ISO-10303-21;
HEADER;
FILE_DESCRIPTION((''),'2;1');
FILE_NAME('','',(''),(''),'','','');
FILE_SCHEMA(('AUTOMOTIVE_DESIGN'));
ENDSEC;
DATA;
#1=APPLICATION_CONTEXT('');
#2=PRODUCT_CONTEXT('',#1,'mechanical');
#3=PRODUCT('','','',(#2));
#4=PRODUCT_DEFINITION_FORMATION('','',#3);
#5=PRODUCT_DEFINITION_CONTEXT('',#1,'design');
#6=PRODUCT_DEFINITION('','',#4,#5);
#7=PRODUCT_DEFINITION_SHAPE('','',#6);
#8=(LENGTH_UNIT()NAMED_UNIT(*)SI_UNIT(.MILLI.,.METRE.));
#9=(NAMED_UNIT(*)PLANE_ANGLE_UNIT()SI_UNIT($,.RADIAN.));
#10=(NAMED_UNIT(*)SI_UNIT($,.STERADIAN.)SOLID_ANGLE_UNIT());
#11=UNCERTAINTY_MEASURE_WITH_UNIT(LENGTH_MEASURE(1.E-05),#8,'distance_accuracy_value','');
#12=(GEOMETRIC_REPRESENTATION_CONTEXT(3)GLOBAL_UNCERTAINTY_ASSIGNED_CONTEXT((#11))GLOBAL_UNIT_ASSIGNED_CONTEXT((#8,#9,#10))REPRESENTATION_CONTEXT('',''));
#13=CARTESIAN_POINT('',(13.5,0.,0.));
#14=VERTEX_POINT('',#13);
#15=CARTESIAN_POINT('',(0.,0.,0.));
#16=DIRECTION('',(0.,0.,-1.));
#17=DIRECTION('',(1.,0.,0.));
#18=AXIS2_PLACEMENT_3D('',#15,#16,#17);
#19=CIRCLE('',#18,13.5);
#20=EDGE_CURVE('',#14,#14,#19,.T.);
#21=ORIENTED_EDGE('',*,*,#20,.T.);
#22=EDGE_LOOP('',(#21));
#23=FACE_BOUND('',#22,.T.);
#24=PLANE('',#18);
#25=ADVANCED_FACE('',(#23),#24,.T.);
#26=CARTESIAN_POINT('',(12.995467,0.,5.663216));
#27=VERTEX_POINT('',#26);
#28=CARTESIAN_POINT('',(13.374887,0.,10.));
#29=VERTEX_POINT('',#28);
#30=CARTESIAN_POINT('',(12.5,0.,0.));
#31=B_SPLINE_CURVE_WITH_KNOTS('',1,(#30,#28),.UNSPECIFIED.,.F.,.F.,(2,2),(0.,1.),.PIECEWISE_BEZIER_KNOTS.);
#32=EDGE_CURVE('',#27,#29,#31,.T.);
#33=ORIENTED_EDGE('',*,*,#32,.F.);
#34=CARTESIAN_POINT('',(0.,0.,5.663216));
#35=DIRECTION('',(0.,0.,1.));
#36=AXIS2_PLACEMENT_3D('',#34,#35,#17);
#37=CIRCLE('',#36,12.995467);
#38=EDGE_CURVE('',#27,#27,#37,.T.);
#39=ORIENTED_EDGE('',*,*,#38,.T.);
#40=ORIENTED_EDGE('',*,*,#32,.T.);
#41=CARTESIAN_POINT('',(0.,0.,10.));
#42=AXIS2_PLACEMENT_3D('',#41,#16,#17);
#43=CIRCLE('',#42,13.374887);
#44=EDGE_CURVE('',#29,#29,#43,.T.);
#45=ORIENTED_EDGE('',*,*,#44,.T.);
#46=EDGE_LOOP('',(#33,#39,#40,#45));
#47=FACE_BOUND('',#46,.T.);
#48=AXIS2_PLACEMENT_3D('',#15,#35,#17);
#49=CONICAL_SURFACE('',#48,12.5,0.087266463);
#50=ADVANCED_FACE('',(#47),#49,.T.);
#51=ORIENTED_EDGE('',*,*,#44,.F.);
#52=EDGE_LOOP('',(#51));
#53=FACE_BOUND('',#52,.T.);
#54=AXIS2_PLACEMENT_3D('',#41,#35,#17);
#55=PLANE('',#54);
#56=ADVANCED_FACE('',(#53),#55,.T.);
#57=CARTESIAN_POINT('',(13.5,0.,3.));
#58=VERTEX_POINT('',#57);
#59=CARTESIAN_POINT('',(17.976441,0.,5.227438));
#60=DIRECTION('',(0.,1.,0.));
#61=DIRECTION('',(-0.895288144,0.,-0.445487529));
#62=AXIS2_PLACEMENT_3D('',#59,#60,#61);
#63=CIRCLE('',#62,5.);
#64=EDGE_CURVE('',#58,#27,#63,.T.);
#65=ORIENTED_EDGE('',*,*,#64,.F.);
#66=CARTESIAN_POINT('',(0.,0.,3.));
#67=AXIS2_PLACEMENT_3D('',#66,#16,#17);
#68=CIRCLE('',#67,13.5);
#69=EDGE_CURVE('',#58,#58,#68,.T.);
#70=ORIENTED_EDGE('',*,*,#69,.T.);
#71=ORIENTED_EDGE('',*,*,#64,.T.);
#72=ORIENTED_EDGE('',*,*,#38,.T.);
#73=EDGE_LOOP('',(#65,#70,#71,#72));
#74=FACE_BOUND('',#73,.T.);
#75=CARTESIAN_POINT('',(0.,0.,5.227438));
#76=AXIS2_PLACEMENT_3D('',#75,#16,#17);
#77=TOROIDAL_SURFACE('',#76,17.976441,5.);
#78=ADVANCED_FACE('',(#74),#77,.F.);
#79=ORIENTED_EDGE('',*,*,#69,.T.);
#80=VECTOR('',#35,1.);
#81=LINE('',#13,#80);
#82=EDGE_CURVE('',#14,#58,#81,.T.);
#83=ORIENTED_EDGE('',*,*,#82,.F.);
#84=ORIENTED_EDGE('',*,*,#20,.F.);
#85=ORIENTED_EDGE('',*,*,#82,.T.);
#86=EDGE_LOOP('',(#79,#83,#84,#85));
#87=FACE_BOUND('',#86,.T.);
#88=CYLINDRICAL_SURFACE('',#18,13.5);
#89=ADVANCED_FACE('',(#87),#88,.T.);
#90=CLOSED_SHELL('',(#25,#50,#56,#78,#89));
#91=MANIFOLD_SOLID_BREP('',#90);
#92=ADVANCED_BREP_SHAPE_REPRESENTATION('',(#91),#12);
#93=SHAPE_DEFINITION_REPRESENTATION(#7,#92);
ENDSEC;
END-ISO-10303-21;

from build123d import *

# Parameters (mm, degrees)
F0_R     = 12.5
F1_DEPTH = 10
F1_TAPER = -5
F2_R     = 13.5
F3_DEPTH = 3


# Not quite as in the source:
# - a fillet or chamfer that OpenCascade refuses, or shapes differently, is made with other operations: its cross-section is extruded or revolved along the edge and cut away or added


with BuildPart() as f1:
    # F0 (on Top) → F1 (new body)
    with BuildSketch(Plane.XY):
        Circle(F0_R)
    extrude(amount=F1_DEPTH, taper=F1_TAPER)

    # F2 (on face) → F3 (join)
    with BuildSketch(Plane(origin=(0, 0, 0), x_dir=(1, 0, 0), z_dir=(0, 0, -1))):
        Circle(F2_R)
    extrude(amount=-F3_DEPTH)

    # F4: fillet of radius 5 on 1 edges, made by hand

    # F4_s1 → F4_t2 (revolve)
    with BuildSketch(Plane.XZ):
        with BuildLine():
            ThreePointArc((13.5, 3), (13.0638190953, 4.2967665116), (12.9954672306, 5.6632163606))
            Line((12.9954672306, 5.6632163606), (12.8958477608, 5.6719319348))
            Line((12.8958477608, 5.6719319348), (12.6628465208, 3.0087155743))
            Line((12.6628465208, 3.0087155743), (12.7624659906, 2.9))
            ThreePointArc((12.7624659906, 2.9), (13.1312329953, 2.9), (13.4104711856, 2.9554512471))
            Line((13.4104711856, 2.9554512471), (13.5, 3))
        make_face()
    revolve(axis=Axis((0, 0, 3), (0, 0, 1)))


solid = f1.part
